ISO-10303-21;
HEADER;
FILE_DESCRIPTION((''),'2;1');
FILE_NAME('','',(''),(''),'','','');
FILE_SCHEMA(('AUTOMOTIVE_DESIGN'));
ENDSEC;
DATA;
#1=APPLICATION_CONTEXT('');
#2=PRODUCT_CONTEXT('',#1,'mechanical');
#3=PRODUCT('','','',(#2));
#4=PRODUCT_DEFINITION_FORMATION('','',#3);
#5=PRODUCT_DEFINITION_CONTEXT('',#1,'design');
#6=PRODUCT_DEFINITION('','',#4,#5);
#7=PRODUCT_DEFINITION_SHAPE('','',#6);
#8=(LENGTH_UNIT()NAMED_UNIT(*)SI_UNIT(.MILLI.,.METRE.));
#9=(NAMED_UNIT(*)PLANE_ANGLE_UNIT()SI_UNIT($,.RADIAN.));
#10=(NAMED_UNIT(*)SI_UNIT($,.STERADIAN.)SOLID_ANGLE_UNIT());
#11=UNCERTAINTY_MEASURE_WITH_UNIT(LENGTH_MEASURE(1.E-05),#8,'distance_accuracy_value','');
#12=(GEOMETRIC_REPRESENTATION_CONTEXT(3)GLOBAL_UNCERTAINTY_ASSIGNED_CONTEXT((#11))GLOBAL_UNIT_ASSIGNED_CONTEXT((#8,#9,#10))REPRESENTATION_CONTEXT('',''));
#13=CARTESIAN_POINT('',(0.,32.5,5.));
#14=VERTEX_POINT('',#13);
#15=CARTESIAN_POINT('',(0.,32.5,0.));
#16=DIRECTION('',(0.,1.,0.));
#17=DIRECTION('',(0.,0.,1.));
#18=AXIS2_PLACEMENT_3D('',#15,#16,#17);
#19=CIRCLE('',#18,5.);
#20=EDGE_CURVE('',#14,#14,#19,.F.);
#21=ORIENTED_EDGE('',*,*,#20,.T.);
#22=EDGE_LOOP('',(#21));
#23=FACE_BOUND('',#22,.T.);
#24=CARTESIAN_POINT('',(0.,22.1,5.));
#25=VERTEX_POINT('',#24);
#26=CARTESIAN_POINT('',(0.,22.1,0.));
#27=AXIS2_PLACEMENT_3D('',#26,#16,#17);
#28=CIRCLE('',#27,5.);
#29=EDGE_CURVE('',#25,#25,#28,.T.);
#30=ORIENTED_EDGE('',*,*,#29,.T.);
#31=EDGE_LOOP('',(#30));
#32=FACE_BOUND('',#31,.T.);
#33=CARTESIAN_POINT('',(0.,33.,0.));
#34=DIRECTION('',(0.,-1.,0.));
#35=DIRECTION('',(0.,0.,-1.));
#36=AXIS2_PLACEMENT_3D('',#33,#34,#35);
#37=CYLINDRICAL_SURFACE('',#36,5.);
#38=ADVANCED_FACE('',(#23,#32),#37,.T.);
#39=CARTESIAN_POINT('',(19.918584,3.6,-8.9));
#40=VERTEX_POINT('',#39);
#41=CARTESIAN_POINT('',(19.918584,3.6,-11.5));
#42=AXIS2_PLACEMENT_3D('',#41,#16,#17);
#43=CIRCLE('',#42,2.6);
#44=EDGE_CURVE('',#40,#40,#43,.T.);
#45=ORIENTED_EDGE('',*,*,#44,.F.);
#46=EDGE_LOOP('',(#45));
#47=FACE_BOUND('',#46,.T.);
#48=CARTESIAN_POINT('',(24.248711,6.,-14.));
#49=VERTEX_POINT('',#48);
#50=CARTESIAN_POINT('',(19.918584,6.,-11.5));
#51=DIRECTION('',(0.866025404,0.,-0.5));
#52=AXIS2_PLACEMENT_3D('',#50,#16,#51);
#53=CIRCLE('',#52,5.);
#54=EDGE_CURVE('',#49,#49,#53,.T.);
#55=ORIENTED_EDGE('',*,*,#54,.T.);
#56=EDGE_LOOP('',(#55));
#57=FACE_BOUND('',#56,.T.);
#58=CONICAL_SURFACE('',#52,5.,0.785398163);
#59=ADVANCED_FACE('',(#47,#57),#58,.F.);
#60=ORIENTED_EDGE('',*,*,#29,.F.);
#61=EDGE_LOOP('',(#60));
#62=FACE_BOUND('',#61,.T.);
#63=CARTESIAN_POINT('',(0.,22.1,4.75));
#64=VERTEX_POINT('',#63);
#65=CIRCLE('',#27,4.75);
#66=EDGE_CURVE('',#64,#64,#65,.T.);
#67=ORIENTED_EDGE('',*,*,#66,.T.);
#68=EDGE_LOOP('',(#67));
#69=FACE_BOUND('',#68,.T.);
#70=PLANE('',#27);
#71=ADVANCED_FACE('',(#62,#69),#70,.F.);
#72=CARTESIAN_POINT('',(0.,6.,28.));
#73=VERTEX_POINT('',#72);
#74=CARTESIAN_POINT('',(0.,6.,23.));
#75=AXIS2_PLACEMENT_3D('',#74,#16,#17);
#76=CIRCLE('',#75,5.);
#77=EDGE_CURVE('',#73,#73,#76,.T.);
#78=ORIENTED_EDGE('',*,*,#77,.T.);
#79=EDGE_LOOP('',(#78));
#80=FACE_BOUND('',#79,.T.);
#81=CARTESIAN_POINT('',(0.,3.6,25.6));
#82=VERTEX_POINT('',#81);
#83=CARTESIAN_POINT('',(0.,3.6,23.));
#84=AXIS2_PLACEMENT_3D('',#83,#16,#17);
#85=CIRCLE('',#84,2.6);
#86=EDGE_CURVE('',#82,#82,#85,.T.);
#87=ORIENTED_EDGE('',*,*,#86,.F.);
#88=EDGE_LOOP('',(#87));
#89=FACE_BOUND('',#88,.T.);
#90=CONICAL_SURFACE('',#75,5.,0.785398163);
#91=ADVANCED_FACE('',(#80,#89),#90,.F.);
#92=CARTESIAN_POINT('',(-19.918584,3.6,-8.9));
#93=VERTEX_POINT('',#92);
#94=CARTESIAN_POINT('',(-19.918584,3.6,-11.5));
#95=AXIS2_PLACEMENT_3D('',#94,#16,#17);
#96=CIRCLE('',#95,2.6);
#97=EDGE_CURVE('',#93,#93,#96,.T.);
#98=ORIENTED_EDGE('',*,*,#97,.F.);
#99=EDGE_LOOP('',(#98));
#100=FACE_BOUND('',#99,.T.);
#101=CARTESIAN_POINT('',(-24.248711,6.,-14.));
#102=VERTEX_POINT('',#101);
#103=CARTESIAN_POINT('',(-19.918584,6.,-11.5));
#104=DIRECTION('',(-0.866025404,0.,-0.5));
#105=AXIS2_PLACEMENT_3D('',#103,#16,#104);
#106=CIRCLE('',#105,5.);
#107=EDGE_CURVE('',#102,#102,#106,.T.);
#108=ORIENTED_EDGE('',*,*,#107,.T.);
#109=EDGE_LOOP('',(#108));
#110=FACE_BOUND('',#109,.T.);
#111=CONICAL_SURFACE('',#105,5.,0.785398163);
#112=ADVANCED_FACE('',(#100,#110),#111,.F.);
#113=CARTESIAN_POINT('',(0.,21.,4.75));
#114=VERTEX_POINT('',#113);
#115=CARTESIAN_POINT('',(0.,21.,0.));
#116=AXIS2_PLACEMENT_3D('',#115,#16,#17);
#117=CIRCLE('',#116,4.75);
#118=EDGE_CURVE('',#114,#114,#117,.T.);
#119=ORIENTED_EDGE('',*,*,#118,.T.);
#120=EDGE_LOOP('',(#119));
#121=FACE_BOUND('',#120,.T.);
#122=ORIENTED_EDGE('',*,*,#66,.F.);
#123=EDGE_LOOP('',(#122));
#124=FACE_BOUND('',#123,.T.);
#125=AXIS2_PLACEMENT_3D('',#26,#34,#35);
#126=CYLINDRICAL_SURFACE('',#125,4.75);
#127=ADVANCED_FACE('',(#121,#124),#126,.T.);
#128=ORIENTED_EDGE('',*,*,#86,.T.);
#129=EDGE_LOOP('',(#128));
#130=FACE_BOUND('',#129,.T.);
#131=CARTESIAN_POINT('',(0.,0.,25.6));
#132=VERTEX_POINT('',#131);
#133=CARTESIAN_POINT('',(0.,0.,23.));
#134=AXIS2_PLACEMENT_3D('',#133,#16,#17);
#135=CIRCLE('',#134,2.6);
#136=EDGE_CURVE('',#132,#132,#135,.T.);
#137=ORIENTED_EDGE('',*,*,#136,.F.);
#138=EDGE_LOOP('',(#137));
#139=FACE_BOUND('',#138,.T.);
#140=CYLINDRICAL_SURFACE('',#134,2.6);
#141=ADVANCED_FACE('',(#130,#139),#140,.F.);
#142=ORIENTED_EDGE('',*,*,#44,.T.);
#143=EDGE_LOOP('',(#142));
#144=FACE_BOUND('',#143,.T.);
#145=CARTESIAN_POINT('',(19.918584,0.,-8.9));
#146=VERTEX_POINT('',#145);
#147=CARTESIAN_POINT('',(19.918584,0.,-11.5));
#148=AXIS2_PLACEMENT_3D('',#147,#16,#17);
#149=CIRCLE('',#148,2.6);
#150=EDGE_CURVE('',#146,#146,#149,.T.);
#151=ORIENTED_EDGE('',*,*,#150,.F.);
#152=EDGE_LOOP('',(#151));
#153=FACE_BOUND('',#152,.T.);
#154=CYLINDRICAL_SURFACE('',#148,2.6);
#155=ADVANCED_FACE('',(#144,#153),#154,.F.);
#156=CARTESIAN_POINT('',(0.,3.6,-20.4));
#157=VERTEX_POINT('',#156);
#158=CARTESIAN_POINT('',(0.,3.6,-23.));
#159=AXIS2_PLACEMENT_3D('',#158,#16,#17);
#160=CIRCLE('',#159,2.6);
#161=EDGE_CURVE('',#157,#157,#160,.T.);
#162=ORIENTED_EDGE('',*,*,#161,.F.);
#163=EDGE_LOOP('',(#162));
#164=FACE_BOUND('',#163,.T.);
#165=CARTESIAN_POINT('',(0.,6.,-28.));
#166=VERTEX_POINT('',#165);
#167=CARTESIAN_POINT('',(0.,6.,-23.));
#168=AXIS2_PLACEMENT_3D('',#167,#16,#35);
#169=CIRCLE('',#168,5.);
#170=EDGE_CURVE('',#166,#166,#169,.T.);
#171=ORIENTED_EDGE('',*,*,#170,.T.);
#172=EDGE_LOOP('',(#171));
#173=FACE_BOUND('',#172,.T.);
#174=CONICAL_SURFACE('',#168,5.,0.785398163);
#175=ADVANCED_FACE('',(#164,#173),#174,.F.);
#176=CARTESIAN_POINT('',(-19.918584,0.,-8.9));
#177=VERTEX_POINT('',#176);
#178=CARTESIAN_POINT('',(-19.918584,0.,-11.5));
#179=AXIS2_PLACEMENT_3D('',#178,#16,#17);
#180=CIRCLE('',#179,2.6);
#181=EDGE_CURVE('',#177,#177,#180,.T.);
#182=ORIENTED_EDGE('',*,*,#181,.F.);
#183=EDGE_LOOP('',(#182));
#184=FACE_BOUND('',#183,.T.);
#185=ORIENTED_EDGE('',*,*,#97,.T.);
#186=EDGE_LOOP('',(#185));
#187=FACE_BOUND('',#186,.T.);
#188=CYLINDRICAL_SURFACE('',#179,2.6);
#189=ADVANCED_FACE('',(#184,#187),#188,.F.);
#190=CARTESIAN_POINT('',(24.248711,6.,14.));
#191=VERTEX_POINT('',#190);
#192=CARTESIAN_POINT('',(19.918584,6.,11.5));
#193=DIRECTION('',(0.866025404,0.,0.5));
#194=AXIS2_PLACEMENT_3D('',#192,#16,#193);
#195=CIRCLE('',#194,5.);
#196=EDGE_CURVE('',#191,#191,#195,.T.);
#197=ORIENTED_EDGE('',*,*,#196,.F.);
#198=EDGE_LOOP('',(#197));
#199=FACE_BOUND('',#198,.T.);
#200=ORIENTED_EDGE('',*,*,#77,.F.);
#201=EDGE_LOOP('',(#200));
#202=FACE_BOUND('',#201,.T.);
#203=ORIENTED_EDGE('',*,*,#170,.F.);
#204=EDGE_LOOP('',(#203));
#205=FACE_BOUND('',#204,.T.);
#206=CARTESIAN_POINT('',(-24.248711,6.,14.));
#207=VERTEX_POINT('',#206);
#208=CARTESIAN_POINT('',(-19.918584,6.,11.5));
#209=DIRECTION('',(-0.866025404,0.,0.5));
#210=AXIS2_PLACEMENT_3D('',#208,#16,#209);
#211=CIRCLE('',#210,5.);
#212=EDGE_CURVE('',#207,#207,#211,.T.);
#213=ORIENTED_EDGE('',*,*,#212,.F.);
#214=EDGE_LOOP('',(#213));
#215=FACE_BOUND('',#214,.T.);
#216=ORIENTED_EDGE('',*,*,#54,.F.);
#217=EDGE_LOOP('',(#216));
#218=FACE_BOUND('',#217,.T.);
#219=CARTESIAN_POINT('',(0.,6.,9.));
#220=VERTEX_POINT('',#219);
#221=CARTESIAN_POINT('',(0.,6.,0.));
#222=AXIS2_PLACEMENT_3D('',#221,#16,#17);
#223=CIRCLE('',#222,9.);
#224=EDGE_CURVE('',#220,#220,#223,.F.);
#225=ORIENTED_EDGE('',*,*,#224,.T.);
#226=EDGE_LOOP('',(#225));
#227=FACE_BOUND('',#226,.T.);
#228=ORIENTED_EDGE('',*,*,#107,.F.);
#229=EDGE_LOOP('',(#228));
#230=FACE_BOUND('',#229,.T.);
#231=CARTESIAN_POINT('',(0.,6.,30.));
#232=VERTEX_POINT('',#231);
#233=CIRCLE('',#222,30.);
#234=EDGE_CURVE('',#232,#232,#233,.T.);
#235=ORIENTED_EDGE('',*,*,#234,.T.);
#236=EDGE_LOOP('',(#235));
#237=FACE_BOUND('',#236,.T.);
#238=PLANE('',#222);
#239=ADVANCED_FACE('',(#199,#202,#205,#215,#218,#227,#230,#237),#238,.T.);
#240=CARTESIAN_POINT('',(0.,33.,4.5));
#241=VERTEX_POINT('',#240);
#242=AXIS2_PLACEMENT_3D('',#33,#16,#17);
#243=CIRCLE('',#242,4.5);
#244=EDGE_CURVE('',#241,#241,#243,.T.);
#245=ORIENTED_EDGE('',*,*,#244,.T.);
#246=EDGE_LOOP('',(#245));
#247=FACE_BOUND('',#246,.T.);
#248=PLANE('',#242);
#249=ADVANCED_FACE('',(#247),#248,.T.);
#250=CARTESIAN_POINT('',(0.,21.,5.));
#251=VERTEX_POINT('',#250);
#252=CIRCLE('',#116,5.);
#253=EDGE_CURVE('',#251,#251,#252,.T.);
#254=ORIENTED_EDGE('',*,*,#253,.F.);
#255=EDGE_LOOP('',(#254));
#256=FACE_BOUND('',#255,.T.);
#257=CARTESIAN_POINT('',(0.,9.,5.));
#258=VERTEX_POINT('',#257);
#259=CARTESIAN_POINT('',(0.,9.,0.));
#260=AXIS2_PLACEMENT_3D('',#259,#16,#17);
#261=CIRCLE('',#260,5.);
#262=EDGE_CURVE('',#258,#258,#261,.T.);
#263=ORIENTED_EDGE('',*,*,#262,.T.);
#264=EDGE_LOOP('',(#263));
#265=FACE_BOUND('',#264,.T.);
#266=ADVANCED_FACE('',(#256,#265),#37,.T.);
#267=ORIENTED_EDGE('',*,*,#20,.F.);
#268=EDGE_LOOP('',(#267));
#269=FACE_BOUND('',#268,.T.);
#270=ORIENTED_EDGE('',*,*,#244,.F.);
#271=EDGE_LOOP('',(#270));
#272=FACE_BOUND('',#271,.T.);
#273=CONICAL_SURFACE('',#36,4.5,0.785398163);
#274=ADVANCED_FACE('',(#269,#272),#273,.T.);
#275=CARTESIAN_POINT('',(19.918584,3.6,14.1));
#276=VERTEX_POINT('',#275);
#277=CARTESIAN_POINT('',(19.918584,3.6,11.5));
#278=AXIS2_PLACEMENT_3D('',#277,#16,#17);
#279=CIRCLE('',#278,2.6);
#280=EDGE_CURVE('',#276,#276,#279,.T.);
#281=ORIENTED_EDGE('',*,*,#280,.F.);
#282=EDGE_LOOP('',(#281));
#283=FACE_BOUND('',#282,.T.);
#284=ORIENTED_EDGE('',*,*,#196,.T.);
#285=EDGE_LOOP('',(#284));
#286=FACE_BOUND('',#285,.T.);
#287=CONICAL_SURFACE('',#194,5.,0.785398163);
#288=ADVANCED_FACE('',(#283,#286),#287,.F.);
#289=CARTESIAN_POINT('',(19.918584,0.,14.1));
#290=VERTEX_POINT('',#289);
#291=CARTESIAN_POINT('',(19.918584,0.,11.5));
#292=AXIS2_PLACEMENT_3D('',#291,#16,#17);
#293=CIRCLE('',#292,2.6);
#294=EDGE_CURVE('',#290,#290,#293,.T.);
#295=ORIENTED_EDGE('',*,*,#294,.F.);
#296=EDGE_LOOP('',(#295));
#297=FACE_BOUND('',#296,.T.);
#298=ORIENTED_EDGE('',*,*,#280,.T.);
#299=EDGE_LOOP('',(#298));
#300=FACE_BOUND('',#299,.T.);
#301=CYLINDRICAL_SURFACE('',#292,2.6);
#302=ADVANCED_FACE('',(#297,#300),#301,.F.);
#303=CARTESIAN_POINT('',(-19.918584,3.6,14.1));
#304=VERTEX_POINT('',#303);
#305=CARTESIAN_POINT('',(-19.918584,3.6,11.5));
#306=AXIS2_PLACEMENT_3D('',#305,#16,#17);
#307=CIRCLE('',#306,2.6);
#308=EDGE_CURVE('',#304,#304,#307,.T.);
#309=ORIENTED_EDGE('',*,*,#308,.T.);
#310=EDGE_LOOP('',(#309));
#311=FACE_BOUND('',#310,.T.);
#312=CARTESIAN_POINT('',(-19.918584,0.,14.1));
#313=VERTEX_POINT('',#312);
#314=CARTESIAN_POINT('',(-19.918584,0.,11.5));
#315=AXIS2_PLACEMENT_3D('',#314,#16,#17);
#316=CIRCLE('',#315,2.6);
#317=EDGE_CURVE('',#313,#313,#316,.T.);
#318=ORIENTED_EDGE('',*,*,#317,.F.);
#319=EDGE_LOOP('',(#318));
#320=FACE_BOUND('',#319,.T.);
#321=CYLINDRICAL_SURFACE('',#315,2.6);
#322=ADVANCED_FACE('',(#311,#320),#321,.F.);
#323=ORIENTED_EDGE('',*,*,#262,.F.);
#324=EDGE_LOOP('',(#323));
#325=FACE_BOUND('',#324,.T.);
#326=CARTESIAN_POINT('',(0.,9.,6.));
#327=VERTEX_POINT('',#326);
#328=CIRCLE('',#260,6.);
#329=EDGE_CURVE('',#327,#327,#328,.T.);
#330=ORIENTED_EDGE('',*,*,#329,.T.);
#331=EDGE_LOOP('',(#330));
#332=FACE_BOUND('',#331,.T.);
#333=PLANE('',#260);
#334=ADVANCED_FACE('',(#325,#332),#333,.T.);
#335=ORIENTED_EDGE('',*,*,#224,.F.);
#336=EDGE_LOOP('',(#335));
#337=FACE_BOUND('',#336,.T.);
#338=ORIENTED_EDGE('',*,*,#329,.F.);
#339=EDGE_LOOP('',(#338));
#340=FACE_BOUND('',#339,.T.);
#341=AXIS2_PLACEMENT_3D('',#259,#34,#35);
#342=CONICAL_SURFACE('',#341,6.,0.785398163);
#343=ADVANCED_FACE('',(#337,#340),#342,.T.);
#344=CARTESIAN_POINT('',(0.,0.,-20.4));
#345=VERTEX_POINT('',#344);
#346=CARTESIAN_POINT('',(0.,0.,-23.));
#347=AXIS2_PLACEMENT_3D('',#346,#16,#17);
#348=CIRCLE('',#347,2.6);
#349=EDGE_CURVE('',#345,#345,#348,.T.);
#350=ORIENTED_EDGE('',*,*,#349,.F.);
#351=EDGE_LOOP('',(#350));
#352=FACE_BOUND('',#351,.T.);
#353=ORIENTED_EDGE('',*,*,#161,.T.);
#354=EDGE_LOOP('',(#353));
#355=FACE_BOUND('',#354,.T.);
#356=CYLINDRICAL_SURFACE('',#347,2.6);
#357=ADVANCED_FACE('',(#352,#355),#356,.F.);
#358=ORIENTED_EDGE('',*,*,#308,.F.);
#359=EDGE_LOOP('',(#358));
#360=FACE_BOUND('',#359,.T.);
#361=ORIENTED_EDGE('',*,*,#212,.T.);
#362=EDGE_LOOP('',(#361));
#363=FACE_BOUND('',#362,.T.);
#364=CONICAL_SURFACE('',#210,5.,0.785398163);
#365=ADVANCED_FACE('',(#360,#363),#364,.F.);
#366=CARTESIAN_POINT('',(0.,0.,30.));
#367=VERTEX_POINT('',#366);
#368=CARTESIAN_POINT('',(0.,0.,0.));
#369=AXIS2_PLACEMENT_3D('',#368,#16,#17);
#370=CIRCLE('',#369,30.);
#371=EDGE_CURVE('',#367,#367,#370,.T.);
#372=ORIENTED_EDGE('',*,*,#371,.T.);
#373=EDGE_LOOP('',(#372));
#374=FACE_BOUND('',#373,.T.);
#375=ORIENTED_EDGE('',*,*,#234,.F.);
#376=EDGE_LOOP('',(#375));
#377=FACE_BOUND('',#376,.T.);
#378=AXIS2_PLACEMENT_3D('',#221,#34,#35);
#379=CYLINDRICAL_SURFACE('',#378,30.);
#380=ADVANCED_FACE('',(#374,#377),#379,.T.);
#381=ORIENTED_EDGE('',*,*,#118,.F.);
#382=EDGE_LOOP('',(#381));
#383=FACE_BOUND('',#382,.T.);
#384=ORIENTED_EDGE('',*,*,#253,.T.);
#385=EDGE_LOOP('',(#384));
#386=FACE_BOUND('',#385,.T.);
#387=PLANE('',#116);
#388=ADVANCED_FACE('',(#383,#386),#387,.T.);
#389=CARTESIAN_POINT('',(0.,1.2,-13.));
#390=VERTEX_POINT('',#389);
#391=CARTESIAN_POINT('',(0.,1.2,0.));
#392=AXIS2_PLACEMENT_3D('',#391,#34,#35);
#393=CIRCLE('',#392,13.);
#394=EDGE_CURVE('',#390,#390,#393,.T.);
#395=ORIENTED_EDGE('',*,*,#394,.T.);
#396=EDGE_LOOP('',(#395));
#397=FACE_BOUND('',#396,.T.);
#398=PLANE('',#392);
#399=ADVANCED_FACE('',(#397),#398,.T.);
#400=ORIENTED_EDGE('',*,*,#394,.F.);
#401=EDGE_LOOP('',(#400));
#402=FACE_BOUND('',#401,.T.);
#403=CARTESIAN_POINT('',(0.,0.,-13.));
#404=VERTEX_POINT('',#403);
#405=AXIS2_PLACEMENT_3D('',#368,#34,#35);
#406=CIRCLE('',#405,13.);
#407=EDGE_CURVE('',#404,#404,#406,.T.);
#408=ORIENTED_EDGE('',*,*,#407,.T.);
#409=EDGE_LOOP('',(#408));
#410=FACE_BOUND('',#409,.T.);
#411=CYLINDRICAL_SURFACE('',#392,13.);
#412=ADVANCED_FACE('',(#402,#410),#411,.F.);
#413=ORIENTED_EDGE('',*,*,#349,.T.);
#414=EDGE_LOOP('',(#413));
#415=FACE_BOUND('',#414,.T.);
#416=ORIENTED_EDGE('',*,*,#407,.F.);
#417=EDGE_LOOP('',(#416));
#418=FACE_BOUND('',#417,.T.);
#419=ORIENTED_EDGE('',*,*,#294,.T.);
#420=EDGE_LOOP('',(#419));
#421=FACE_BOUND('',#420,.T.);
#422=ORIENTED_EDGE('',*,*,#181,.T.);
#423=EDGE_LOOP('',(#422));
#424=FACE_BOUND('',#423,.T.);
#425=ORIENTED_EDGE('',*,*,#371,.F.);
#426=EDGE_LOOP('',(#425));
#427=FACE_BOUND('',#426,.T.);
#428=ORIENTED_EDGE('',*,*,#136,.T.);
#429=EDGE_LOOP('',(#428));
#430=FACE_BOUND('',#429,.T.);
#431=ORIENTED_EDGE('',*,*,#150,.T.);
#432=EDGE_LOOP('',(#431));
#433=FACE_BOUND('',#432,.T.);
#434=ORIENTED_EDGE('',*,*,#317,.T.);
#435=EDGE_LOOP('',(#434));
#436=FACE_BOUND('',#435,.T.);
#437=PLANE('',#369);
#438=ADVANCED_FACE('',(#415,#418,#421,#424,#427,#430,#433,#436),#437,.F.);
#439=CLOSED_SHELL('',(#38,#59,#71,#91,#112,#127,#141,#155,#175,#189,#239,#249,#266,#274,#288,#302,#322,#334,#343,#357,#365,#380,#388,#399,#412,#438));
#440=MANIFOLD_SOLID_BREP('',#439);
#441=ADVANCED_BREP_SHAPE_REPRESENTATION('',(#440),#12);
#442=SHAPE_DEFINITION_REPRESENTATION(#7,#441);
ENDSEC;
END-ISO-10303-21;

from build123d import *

# Parameters (mm, degrees)
SKETCH_1_R               = 30
EXTRUDE_1_DEPTH          = 6
SKETCH_2_R               = 6
EXTRUDE_2_DEPTH          = 3
SKETCH_3_R               = 5
EXTRUDE_3_DEPTH          = 24
CUT_EXTRUDE_START        = -12
SKETCH_4_OUTSIDE_W       = 80.208
SKETCH_4_OUTSIDE_H       = 80.208
SKETCH_4_OUTSIDE_R       = 4.75
CUT_EXTRUDE_1_DEPTH      = 1.1
SKETCH_5_R               = 2.6
CUT_EXTRUDE_2_DEPTH      = 51.289163843
CHAMFER_1_SIZE           = 3
CHAMFER_2_SIZE           = 0.5
SKETCH_6_R               = 13
CUT_EXTRUDE_3_DEPTH      = 1.2
PATTERN_CIRCULAR_1_COUNT = 6


with BuildPart() as part:
    # 草图1 → 凸台-拉伸1 (new body)
    with BuildSketch(Plane(origin=(0, 0, 0), x_dir=(1, 0, 0), z_dir=(0, 1, 0))):
        with Locations(Location((0, 0, 0), (0, 0, 270))):
            Circle(SKETCH_1_R)
    extrude(amount=EXTRUDE_1_DEPTH)

    # 草图2 → 凸台-拉伸2 (add)
    with BuildSketch(Plane(origin=(0, 6, 0), x_dir=(1, 0, 0), z_dir=(0, 1, 0))):
        with Locations(Location((0, 0, 0), (0, 0, 270))):
            Circle(SKETCH_2_R)
    extrude(amount=EXTRUDE_2_DEPTH)

    # 草图3 → 凸台-拉伸3 (add)
    with BuildSketch(Plane(origin=(0, 9, 0), x_dir=(1, 0, 0), z_dir=(0, 1, 0))):
        with Locations(Location((0, 0, 0), (0, 0, 270))):
            Circle(SKETCH_3_R)
    extrude(amount=EXTRUDE_3_DEPTH)

    # 草图4 outside → 切除-拉伸1 (cut)
    with BuildSketch(Plane(origin=(0, 33, 0), x_dir=(1, 0, 0), z_dir=(0, 1, 0)).offset(CUT_EXTRUDE_START)):
        Rectangle(SKETCH_4_OUTSIDE_W, SKETCH_4_OUTSIDE_H)
        with Locations(Location((0, 0, 0), (0, 0, 270))):
            Circle(SKETCH_4_OUTSIDE_R, mode=Mode.SUBTRACT)
    extrude(amount=CUT_EXTRUDE_1_DEPTH, mode=Mode.SUBTRACT)

    # 草图5 → 切除-拉伸2 (cut, through all)
    with BuildSketch(Plane(origin=(0, 6, 0), x_dir=(1, 0, 0), z_dir=(0, 1, 0))):
        with Locations(Location((0, 23, 0), (0, 0, 270))):
            Circle(SKETCH_5_R)
        with Locations(Location((19.918584287, 11.5, 0), (0, 0, 270))):
            Circle(SKETCH_5_R)
        with Locations(Location((19.918584287, -11.5, 0), (0, 0, 270))):
            Circle(SKETCH_5_R)
        with Locations(Location((0, -23, 0), (0, 0, 270))):
            Circle(SKETCH_5_R)
        with Locations(Location((-19.918584287, -11.5, 0), (0, 0, 270))):
            Circle(SKETCH_5_R)
        with Locations(Location((-19.918584287, 11.5, 0), (0, 0, 270))):
            Circle(SKETCH_5_R)
    extrude(amount=-CUT_EXTRUDE_2_DEPTH, mode=Mode.SUBTRACT)

    # 倒角1
    chamfer_1_edges = [part.edges().sort_by_distance(p)[0] for p in [
        (0, 6, -6),
    ]]
    chamfer(chamfer_1_edges, length=CHAMFER_1_SIZE - 0.0001)  # a hair under: the kernel refuses the full size

    # 倒角2
    chamfer_2_edges = [part.edges().sort_by_distance(p)[0] for p in [
        (0, 33, -5),
    ]]
    chamfer(chamfer_2_edges, length=CHAMFER_2_SIZE)

    # 草图6 → 切除-拉伸3 (cut)
    with BuildSketch(Plane.XZ):
        with Locations(Location((0, 0, 0), (0, 0, 270))):
            Circle(SKETCH_6_R)
    extrude(amount=-CUT_EXTRUDE_3_DEPTH, mode=Mode.SUBTRACT)

    # 草图7 → 切除-旋转1 (revolve, cut)
    with BuildSketch(Plane(origin=(0, 0, 0), x_dir=(0, 0, -1), z_dir=(1, 0, 0))):
        Polygon((-28, 6), (-23, 6), (-23, 1.9), (-23.9, 1.9), align=None)
    cut_revolve_1 = revolve(axis=Axis((0, 6, 23), (0, -1, 0)), mode=Mode.SUBTRACT)

    # 阵列(圆周)1: 切除-旋转1 ×6 about axis
    pattern_circular_1_axis = Axis((0, 0, 0), (0, 1, 0))
    for i in range(1, PATTERN_CIRCULAR_1_COUNT):
        add(cut_revolve_1.rotate(pattern_circular_1_axis, i * 360 / PATTERN_CIRCULAR_1_COUNT), mode=Mode.SUBTRACT)


solid = part.part
